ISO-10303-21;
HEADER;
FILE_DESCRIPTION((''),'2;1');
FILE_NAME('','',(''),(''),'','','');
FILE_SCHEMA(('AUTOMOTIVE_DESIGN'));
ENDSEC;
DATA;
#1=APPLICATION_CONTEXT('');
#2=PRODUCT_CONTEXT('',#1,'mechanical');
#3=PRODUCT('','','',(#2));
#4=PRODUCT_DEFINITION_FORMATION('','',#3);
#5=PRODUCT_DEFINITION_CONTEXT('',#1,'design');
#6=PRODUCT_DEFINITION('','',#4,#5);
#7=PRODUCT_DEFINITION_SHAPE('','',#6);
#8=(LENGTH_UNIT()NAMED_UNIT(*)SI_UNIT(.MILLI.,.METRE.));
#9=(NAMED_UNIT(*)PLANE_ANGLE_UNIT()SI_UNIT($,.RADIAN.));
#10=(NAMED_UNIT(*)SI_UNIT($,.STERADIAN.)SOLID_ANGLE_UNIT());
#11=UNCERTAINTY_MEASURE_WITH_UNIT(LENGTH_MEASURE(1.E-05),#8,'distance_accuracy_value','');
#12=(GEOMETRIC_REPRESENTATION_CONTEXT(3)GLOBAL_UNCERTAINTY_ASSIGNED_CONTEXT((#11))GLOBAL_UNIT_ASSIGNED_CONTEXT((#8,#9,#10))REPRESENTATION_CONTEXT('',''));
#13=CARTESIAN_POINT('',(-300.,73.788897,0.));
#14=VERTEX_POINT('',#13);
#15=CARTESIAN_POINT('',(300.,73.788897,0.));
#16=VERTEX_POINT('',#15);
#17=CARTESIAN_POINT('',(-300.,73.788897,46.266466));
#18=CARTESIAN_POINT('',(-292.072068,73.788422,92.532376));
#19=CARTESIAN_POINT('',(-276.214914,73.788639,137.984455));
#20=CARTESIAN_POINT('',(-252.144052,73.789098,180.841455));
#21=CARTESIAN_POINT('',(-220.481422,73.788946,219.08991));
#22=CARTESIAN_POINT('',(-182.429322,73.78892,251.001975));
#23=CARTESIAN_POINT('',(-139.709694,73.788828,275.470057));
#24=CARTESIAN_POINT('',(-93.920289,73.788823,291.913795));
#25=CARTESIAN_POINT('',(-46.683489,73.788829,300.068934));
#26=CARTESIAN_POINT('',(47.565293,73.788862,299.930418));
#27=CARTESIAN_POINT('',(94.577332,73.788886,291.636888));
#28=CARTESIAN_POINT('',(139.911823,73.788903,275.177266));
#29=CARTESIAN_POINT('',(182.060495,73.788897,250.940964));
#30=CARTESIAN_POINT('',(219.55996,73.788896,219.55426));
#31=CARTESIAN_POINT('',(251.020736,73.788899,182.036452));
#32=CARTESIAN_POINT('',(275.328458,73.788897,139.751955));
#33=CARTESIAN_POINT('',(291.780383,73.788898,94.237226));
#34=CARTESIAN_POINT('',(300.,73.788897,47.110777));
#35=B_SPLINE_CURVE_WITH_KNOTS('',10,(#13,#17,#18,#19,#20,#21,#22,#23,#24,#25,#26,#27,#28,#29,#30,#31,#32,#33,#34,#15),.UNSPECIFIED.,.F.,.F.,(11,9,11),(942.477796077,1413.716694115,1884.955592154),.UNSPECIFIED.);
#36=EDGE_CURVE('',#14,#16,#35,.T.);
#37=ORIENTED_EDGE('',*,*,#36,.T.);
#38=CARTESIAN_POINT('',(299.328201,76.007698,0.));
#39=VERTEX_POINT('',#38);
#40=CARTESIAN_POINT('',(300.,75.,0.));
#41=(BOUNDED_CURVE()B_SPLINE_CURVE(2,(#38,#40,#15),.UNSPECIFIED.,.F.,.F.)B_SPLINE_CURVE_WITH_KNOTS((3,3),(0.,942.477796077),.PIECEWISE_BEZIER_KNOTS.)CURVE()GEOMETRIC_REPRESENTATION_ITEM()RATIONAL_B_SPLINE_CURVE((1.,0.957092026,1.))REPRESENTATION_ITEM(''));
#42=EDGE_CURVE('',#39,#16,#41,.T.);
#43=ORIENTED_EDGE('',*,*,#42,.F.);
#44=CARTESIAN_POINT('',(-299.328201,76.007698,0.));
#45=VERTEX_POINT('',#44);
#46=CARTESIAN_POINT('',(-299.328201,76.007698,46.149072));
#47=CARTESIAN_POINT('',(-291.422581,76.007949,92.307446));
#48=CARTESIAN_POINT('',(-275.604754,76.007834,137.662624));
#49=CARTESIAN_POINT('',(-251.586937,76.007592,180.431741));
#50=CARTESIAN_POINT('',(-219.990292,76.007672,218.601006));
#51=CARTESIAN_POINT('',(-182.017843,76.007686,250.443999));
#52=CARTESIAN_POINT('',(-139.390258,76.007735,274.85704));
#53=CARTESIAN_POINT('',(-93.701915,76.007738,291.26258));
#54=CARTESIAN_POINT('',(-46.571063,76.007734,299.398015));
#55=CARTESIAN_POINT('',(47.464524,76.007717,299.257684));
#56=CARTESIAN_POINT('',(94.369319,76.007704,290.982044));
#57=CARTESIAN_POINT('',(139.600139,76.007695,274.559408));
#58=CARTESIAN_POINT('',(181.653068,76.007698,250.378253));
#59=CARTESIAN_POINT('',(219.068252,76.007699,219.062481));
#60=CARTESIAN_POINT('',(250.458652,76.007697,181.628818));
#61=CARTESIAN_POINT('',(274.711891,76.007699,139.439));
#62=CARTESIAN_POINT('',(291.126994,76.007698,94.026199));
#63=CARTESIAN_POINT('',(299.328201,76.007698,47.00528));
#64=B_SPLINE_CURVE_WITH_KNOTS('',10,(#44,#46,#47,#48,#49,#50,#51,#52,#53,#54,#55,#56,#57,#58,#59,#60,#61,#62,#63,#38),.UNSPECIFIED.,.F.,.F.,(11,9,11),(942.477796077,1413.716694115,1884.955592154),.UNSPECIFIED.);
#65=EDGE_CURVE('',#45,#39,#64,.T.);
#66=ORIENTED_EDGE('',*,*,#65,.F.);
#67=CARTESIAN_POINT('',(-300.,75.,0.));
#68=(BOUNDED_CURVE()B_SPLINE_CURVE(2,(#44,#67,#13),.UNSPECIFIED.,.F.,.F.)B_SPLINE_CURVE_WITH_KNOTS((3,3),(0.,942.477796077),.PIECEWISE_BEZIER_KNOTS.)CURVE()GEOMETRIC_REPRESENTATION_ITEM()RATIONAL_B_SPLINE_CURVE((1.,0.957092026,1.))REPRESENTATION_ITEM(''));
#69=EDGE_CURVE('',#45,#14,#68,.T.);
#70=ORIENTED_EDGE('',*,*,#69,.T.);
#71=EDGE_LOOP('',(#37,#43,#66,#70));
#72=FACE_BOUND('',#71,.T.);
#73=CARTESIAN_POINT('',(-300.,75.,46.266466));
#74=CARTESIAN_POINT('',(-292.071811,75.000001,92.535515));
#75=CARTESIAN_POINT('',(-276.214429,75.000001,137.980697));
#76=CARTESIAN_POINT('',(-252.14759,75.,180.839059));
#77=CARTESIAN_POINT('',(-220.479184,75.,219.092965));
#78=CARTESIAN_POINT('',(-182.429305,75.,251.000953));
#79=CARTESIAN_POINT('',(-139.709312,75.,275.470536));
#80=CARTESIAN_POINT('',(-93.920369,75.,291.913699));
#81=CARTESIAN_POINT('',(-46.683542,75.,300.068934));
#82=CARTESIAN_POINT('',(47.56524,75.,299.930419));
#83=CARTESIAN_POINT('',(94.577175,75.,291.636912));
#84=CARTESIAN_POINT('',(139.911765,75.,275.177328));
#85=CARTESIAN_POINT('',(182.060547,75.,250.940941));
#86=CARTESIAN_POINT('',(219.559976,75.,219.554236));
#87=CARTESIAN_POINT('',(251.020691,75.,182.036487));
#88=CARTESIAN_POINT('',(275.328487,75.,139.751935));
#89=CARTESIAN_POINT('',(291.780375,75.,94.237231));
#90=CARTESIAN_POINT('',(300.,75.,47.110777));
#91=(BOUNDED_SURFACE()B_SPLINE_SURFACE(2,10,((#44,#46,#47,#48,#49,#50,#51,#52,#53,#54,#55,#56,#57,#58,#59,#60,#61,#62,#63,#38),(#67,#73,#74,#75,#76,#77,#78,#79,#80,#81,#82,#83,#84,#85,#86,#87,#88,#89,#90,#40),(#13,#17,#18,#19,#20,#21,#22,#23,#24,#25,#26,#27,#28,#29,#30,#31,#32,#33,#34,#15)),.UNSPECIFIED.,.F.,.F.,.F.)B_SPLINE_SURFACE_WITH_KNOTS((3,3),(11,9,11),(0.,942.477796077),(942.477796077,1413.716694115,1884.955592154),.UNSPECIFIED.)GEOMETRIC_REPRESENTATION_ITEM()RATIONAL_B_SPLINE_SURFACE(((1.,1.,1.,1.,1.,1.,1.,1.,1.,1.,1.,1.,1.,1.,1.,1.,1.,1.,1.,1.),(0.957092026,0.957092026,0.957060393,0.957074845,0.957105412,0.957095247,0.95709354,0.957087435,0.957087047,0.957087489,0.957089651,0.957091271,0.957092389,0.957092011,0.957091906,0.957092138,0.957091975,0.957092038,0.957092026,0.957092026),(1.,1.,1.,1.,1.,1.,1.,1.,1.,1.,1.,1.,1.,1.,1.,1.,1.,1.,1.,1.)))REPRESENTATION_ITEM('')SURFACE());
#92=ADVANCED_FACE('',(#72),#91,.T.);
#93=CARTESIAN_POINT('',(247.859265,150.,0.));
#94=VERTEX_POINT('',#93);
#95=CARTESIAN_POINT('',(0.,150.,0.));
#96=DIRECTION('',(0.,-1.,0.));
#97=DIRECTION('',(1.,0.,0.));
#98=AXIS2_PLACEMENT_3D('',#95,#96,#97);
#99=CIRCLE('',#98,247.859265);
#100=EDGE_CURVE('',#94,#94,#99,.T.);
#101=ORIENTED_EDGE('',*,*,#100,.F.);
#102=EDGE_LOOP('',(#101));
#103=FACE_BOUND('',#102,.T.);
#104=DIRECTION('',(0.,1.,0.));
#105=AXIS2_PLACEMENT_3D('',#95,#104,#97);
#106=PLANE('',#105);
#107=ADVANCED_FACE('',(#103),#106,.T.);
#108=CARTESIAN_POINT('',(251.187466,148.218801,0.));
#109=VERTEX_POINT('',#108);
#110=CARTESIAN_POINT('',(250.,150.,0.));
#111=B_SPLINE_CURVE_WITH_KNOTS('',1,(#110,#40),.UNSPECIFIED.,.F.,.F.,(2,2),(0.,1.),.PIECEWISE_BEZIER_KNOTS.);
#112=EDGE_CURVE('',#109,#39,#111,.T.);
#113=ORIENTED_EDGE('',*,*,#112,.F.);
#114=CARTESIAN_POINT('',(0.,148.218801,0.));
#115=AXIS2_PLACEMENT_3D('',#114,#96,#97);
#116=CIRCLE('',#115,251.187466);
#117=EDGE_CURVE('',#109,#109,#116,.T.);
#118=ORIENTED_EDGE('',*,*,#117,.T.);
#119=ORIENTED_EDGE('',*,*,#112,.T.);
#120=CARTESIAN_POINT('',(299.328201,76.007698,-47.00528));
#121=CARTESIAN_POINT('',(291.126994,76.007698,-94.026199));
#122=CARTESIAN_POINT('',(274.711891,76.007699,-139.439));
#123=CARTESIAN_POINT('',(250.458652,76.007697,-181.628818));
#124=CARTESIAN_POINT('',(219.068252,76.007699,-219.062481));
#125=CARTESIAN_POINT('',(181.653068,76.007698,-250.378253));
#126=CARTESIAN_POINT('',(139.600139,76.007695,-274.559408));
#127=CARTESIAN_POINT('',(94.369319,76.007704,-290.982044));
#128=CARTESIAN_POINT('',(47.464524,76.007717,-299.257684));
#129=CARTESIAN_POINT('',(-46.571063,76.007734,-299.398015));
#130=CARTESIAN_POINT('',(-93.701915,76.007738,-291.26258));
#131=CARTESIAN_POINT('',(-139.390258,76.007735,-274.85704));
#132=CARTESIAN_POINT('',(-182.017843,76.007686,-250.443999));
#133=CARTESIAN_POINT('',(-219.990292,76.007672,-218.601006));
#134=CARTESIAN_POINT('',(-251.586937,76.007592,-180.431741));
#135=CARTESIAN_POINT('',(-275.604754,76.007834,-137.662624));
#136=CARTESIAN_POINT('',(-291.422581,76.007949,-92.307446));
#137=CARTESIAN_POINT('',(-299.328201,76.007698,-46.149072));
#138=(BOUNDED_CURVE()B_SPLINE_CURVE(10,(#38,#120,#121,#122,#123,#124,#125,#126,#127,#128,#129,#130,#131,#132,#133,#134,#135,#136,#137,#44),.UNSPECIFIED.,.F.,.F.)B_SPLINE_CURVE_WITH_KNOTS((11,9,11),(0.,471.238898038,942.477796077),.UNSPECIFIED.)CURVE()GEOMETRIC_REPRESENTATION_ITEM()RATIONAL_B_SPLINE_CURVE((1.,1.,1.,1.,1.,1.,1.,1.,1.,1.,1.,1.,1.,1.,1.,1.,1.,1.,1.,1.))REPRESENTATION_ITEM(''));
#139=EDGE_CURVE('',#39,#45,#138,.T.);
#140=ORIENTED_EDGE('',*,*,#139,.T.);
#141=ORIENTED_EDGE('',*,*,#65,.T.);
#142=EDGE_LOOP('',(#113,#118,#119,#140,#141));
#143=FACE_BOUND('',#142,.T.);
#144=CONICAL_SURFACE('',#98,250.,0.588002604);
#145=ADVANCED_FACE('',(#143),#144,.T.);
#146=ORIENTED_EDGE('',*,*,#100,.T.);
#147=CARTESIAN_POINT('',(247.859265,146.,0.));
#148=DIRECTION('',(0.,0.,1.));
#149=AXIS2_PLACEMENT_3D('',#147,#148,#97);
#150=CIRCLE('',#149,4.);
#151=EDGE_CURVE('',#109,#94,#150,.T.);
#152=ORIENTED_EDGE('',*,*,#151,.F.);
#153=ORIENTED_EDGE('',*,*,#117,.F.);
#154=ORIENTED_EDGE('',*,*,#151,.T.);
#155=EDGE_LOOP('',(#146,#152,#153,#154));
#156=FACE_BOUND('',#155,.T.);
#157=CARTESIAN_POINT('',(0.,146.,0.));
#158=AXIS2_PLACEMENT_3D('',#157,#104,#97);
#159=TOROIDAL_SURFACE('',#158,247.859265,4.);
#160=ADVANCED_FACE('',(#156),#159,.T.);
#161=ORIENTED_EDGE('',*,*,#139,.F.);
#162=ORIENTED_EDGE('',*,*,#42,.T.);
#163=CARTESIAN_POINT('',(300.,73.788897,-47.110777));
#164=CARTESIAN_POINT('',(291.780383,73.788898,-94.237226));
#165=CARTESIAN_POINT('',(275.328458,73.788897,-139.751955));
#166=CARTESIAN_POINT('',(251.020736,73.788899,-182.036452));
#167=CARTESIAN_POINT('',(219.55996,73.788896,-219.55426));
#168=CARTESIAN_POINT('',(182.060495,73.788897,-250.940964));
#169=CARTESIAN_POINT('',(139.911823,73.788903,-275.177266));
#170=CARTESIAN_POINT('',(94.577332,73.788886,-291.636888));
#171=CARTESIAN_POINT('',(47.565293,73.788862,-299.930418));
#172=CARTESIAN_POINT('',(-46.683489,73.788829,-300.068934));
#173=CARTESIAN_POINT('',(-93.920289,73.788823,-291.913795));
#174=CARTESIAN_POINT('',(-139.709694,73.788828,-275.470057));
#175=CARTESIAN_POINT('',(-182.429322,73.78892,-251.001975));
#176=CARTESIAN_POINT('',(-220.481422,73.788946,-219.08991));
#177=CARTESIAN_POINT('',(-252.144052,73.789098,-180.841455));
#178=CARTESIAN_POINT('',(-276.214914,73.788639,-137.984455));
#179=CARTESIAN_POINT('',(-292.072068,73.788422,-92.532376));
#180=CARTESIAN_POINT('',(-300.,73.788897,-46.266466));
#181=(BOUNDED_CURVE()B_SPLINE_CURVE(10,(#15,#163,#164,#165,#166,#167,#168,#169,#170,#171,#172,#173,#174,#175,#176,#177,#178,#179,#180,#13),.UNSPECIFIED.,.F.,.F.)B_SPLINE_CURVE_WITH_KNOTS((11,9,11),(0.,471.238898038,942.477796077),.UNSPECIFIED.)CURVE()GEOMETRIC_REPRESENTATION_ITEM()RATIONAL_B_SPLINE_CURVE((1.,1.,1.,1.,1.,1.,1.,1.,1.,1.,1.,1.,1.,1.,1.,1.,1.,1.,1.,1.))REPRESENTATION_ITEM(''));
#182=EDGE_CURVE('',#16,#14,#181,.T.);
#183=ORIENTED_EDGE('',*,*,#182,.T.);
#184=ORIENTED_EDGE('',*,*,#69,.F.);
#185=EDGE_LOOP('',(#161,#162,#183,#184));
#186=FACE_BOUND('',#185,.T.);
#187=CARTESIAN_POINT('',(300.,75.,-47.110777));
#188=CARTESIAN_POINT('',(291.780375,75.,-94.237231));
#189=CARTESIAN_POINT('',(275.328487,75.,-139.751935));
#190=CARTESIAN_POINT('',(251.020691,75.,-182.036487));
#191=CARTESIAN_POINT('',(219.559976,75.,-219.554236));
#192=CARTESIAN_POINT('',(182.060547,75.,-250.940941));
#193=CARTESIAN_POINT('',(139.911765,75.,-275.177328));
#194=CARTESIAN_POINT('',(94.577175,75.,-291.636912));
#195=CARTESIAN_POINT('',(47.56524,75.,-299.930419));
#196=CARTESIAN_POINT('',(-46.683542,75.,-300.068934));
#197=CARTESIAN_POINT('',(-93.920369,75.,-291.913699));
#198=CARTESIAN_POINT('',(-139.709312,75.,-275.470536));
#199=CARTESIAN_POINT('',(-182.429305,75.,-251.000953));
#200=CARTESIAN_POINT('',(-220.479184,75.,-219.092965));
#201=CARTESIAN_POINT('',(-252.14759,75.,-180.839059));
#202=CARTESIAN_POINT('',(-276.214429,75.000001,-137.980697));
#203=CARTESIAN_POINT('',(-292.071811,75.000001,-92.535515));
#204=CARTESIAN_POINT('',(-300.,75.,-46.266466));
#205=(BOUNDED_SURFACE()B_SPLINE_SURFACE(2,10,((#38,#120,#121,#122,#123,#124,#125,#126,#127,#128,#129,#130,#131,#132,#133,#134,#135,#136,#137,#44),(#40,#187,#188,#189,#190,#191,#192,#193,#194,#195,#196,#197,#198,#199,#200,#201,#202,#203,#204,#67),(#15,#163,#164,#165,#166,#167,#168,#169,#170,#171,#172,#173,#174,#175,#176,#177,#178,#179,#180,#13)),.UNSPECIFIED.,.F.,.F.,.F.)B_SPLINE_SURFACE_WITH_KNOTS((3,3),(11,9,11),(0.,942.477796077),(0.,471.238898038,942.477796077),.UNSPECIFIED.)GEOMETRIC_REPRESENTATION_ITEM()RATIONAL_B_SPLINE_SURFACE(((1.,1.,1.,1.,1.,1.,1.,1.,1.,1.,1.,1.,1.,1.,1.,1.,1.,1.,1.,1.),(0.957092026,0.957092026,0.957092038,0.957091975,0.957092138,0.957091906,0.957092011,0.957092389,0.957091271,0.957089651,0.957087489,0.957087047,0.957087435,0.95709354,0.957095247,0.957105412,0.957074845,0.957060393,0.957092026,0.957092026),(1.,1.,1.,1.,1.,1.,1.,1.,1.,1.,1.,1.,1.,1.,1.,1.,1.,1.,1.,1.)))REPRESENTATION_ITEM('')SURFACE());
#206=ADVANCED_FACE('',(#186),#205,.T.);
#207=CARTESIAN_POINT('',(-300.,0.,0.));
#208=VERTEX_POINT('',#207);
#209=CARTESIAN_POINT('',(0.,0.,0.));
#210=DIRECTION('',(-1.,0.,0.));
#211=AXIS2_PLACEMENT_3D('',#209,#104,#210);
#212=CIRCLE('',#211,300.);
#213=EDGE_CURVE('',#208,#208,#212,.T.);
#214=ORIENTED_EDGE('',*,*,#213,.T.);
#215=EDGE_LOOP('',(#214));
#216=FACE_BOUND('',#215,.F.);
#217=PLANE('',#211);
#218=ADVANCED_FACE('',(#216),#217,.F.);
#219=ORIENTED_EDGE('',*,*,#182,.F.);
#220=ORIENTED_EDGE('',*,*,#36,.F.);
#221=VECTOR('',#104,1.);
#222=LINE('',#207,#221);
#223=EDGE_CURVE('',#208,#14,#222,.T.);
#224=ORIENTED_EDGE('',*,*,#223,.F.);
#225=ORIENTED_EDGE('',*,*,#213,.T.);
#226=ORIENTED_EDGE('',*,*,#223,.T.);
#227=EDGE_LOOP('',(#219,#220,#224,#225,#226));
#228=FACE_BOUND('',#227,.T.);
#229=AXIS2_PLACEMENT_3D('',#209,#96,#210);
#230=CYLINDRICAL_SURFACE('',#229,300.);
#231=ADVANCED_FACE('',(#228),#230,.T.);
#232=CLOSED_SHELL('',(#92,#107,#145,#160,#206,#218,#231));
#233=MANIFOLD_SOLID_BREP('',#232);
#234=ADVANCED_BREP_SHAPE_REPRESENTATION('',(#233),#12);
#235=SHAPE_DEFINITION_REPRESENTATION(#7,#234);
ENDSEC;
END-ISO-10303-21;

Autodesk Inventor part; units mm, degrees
ref_plane "YZ Plane" through (0, 0, 0) normal (1, 0, 0) x (0, 1, 0)
ref_plane "XZ Plane" through (0, 0, 0) normal (0, 1, 0) x (-1, 0, 0)
ref_plane "XY Plane" through (0, 0, 0) normal (0, 0, 1) x (1, 0, 0)
sketch "Sketch1" plane through (0, 0, 0) normal (0, 1, 0) x (-1, 0, 0)
  circle A0 centre (0, 0) radius 300
  dimension "d0" = 600
extrude "Extrusion1" add sketch "Sketch1" along normal blind 75
sketch "Sketch2" plane through (0, 75, 0) normal (0, 1, 0) x (1, 0, 0)
  circle A0 centre (0, 0) radius 250
  dimension "d3" = 500
extrude "Extrusion2" add sketch "Sketch2" along normal blind 75
loft "Loft1" add section 1 edges at (-250, 150, 0) section 2 edges at (300, 75, 0)
fillet "Fillet1" radius 4 1 edges at (-250, 150, 0)
fillet "Fillet2" radius 4 2 edges at (0, 75, -300) (0, 75, 300)
properties part number "Base"
